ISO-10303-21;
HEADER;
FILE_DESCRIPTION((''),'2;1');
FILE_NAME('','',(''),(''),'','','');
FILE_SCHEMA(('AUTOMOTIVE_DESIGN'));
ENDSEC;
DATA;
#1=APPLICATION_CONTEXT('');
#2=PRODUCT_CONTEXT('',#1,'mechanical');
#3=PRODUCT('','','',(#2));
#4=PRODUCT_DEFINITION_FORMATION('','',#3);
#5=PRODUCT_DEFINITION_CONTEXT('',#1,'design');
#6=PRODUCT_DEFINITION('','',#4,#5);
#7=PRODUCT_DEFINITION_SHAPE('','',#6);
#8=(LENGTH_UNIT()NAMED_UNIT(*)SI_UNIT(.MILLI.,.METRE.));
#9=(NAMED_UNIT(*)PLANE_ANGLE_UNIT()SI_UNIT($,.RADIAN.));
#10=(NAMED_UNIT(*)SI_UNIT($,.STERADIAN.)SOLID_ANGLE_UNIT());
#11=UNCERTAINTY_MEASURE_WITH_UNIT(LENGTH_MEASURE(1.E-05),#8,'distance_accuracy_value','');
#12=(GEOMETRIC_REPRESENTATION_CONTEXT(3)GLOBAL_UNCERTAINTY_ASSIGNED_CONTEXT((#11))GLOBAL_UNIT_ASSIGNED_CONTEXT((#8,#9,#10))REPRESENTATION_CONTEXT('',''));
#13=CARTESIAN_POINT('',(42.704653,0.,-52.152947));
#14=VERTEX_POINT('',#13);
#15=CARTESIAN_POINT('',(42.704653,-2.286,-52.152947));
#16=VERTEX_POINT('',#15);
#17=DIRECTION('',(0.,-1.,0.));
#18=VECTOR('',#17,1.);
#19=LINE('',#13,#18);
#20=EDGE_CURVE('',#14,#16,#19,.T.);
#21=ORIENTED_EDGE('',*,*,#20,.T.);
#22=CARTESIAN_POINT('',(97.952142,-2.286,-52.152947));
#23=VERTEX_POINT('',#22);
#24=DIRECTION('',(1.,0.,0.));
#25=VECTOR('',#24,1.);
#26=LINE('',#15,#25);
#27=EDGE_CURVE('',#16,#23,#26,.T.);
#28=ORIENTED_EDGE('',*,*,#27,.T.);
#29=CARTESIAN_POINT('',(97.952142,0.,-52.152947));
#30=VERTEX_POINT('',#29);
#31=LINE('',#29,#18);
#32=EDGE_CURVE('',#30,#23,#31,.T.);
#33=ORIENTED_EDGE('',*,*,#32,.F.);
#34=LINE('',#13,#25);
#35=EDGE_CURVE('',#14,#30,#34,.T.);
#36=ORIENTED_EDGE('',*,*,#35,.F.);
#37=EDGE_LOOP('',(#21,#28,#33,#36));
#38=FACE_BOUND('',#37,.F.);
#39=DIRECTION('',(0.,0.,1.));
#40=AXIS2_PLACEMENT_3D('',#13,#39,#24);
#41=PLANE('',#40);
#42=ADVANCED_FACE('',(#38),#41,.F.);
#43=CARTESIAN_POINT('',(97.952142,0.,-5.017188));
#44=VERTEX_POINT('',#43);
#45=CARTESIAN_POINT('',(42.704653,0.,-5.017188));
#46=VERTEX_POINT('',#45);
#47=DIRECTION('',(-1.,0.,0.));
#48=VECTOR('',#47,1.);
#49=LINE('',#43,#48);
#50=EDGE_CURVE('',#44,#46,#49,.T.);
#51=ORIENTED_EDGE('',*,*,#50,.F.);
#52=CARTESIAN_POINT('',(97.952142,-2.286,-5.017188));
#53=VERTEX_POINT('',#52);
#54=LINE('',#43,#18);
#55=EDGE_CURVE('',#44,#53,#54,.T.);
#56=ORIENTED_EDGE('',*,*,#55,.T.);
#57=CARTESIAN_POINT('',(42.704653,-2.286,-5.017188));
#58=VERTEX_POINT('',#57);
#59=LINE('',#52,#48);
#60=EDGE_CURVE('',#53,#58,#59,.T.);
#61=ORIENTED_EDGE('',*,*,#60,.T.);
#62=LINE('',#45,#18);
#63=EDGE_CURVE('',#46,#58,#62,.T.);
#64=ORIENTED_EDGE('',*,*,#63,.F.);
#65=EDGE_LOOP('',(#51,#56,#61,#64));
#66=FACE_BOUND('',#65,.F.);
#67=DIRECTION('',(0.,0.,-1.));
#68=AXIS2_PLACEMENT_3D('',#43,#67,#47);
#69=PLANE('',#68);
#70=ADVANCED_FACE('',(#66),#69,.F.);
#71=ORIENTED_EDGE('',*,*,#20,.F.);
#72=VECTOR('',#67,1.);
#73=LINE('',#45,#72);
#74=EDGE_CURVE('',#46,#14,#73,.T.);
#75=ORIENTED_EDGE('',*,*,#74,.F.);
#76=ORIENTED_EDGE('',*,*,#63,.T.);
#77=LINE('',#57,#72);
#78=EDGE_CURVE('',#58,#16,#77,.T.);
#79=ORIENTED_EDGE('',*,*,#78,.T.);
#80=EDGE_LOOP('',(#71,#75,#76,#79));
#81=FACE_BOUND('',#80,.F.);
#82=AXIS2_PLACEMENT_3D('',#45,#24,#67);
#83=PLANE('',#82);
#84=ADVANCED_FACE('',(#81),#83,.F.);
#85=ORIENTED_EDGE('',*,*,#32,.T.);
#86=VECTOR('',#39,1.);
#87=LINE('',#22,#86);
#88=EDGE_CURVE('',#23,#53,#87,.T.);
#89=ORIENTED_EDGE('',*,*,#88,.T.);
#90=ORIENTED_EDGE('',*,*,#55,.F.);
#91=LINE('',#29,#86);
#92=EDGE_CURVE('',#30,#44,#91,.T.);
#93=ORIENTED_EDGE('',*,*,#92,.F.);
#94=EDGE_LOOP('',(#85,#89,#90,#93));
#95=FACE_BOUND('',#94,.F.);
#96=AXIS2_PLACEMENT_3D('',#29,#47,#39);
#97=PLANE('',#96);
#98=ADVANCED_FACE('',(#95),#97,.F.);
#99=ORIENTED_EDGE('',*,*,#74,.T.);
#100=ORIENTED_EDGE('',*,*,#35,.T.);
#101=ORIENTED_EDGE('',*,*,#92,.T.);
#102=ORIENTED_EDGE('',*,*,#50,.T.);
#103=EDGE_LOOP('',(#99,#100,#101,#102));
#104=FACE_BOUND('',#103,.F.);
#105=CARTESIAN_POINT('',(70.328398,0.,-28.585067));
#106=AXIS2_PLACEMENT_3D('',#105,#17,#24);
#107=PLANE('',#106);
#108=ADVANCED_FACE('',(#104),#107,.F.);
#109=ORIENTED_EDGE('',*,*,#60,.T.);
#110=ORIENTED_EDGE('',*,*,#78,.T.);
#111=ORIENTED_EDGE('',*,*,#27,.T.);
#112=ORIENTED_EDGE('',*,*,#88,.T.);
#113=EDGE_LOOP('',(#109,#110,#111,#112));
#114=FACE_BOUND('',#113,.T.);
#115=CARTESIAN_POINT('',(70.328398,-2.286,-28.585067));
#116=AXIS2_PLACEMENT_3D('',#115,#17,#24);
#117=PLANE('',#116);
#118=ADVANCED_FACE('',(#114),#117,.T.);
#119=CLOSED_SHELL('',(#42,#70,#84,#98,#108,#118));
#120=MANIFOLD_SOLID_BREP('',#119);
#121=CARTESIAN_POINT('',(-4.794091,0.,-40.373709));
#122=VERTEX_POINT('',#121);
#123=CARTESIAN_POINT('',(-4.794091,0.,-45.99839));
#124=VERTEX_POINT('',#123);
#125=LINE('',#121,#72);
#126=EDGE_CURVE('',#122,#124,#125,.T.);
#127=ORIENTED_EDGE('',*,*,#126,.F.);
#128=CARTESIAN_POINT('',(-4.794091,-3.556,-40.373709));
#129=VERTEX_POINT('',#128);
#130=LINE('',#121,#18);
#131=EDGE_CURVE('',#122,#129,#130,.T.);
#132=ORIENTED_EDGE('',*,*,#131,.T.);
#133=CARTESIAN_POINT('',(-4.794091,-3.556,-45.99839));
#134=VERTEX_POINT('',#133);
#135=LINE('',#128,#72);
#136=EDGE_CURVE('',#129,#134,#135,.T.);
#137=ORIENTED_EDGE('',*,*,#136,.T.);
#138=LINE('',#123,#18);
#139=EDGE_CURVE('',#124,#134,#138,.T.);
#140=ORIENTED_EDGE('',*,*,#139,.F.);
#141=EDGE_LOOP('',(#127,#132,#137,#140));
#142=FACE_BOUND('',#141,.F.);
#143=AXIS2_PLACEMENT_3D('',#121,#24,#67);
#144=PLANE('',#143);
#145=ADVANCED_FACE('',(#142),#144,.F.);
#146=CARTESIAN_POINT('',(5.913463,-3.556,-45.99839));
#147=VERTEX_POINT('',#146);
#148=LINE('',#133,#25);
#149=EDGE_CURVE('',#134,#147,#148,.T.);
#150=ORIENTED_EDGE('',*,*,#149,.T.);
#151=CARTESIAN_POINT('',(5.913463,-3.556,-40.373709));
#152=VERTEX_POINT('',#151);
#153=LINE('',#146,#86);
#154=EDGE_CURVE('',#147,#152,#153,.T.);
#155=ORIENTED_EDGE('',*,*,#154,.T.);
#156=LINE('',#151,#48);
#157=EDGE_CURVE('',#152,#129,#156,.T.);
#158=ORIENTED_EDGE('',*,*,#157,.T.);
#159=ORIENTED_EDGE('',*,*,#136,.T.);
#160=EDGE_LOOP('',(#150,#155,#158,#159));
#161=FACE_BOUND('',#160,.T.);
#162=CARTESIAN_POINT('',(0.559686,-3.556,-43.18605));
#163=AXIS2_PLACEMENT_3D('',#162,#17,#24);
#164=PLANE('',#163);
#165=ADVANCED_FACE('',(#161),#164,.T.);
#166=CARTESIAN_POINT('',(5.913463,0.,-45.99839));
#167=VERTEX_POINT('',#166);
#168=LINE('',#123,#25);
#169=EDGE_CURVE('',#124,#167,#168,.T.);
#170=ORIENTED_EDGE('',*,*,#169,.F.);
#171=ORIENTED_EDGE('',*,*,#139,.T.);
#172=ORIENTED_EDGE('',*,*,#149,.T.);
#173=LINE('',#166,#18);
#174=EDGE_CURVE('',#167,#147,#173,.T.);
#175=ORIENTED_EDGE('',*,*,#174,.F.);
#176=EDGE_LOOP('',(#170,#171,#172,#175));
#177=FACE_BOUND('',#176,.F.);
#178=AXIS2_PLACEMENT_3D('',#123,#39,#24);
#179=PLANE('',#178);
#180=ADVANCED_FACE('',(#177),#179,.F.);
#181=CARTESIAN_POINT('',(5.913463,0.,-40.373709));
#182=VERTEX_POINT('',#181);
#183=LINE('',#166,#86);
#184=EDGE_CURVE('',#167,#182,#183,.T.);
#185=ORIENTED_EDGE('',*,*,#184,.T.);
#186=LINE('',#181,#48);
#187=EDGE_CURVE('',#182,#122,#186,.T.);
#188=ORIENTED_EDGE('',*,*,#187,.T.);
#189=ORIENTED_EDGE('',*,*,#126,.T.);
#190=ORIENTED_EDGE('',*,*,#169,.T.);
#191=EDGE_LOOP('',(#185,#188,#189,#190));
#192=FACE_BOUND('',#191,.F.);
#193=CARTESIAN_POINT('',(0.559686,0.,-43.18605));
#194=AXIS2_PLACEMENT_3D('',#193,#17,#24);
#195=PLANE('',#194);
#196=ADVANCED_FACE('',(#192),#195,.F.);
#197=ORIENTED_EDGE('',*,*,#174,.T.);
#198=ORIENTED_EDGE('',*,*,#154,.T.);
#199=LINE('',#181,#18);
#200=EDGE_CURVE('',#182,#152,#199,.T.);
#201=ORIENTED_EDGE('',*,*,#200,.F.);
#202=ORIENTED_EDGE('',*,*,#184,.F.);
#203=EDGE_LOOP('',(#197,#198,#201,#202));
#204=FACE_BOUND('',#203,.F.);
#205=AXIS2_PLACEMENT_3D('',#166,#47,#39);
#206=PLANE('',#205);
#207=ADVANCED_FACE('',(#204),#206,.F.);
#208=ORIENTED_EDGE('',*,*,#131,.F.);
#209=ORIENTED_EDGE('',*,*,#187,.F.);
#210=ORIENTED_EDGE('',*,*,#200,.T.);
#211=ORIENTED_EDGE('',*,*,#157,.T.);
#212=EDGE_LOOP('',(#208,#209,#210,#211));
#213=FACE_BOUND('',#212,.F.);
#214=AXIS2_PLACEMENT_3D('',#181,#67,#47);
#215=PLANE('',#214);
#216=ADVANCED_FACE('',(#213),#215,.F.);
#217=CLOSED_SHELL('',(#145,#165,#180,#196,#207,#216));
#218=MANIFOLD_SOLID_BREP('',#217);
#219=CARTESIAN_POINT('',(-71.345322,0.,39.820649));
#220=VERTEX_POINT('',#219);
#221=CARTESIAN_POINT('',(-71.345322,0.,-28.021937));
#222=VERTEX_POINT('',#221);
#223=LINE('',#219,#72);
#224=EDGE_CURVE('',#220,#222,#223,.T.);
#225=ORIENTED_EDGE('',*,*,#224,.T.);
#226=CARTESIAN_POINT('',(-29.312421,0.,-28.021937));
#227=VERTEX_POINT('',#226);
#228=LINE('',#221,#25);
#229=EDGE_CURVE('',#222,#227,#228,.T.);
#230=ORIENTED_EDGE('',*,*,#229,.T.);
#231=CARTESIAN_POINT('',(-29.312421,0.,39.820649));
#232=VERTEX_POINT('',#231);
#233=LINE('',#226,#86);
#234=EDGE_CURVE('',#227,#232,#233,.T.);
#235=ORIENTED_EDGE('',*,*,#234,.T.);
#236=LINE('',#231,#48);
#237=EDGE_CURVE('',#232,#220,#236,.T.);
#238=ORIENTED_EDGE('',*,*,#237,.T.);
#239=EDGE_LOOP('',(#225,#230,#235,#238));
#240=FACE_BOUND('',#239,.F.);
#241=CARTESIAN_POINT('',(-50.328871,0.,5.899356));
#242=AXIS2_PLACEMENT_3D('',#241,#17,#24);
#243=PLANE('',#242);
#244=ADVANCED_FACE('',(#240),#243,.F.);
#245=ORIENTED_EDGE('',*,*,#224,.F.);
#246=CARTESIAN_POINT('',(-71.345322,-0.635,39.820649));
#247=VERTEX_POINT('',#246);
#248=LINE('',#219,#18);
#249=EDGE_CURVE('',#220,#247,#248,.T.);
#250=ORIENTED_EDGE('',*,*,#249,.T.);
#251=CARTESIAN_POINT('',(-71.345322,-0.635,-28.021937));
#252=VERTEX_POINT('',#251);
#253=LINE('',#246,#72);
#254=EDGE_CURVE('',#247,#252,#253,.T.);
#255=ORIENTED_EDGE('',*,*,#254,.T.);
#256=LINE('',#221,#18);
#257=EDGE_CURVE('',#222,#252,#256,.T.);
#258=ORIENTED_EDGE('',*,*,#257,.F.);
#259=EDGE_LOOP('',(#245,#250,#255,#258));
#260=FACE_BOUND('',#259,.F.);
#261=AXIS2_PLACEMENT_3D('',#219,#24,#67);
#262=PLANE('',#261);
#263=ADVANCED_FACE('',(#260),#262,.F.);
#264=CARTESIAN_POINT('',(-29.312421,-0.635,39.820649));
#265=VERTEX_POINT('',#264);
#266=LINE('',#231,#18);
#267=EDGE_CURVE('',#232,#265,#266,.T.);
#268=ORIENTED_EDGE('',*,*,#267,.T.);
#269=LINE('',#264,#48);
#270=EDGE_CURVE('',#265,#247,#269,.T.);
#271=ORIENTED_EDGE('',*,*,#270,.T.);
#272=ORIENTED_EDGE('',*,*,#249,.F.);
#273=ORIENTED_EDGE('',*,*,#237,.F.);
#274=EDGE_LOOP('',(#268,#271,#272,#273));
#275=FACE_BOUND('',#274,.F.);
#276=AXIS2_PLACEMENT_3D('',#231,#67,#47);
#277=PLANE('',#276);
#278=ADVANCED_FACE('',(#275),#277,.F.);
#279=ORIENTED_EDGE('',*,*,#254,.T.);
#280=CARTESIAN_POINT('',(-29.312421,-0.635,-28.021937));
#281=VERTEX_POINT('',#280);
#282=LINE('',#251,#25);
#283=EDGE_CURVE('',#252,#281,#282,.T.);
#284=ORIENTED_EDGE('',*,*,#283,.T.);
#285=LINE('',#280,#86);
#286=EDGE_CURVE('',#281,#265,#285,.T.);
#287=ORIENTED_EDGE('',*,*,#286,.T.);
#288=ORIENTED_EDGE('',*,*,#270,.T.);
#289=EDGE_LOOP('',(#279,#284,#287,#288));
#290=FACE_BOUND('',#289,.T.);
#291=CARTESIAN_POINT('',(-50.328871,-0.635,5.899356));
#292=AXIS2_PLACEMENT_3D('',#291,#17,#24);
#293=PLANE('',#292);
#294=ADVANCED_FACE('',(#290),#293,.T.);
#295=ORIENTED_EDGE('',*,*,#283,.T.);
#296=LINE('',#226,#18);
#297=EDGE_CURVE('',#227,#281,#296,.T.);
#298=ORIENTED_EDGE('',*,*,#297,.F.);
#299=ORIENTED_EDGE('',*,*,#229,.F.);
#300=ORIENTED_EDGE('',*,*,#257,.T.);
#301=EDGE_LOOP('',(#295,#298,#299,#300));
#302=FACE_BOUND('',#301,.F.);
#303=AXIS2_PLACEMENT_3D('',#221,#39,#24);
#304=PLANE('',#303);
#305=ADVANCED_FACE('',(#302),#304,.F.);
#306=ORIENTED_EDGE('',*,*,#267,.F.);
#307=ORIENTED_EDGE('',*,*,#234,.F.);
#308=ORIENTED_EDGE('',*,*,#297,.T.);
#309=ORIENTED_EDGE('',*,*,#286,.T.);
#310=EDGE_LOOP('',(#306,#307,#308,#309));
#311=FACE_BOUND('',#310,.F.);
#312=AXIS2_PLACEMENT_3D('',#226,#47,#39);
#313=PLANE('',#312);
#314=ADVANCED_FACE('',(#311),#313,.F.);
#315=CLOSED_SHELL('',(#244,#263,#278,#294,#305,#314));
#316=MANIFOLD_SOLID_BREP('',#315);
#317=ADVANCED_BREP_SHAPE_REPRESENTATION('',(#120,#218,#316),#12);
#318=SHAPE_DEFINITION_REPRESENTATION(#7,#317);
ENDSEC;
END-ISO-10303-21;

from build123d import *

# Parameters (mm, degrees)
F1_DEPTH = 0.635
F2_DEPTH = 3.556
F3_DEPTH = 2.286


with BuildPart() as f1:
    # F0 (on Front) → F1 (new body)
    with BuildSketch(Plane.XZ):
        Polygon((-29.3124206364, 39.8206487298), (-71.3453218341, 39.8206487298), (-71.3453218341, -28.0219372362), (-61.021450907, -28.0219372362), (-48.3009703457, -28.0219372362), (-29.3124206364, -28.0219372362), align=None)
    extrude(amount=F1_DEPTH)


with BuildPart() as f2:
    # F0 (on Front) → F2 (new body)
    with BuildSketch(Plane.XZ):
        Polygon((-4.7940909863, -40.3737090528), (-4.7940909863, -43.1860495352), (-4.7940909863, -45.9983900177), (5.9134630722, -45.9983900177), (5.9134630722, -40.3737090528), align=None)
    extrude(amount=F2_DEPTH)


with BuildPart() as f3:
    # F0 (on Front) → F3 (new body)
    with BuildSketch(Plane.XZ):
        Polygon((97.9521423578, -5.0171883777), (42.7046529949, -5.0171883777), (42.7046529949, -25.2566132694), (42.7046529949, -52.1529465914), (97.9521423578, -52.1529465914), align=None)
    extrude(amount=F3_DEPTH)


solid = Compound([f1.part, f2.part, f3.part])
